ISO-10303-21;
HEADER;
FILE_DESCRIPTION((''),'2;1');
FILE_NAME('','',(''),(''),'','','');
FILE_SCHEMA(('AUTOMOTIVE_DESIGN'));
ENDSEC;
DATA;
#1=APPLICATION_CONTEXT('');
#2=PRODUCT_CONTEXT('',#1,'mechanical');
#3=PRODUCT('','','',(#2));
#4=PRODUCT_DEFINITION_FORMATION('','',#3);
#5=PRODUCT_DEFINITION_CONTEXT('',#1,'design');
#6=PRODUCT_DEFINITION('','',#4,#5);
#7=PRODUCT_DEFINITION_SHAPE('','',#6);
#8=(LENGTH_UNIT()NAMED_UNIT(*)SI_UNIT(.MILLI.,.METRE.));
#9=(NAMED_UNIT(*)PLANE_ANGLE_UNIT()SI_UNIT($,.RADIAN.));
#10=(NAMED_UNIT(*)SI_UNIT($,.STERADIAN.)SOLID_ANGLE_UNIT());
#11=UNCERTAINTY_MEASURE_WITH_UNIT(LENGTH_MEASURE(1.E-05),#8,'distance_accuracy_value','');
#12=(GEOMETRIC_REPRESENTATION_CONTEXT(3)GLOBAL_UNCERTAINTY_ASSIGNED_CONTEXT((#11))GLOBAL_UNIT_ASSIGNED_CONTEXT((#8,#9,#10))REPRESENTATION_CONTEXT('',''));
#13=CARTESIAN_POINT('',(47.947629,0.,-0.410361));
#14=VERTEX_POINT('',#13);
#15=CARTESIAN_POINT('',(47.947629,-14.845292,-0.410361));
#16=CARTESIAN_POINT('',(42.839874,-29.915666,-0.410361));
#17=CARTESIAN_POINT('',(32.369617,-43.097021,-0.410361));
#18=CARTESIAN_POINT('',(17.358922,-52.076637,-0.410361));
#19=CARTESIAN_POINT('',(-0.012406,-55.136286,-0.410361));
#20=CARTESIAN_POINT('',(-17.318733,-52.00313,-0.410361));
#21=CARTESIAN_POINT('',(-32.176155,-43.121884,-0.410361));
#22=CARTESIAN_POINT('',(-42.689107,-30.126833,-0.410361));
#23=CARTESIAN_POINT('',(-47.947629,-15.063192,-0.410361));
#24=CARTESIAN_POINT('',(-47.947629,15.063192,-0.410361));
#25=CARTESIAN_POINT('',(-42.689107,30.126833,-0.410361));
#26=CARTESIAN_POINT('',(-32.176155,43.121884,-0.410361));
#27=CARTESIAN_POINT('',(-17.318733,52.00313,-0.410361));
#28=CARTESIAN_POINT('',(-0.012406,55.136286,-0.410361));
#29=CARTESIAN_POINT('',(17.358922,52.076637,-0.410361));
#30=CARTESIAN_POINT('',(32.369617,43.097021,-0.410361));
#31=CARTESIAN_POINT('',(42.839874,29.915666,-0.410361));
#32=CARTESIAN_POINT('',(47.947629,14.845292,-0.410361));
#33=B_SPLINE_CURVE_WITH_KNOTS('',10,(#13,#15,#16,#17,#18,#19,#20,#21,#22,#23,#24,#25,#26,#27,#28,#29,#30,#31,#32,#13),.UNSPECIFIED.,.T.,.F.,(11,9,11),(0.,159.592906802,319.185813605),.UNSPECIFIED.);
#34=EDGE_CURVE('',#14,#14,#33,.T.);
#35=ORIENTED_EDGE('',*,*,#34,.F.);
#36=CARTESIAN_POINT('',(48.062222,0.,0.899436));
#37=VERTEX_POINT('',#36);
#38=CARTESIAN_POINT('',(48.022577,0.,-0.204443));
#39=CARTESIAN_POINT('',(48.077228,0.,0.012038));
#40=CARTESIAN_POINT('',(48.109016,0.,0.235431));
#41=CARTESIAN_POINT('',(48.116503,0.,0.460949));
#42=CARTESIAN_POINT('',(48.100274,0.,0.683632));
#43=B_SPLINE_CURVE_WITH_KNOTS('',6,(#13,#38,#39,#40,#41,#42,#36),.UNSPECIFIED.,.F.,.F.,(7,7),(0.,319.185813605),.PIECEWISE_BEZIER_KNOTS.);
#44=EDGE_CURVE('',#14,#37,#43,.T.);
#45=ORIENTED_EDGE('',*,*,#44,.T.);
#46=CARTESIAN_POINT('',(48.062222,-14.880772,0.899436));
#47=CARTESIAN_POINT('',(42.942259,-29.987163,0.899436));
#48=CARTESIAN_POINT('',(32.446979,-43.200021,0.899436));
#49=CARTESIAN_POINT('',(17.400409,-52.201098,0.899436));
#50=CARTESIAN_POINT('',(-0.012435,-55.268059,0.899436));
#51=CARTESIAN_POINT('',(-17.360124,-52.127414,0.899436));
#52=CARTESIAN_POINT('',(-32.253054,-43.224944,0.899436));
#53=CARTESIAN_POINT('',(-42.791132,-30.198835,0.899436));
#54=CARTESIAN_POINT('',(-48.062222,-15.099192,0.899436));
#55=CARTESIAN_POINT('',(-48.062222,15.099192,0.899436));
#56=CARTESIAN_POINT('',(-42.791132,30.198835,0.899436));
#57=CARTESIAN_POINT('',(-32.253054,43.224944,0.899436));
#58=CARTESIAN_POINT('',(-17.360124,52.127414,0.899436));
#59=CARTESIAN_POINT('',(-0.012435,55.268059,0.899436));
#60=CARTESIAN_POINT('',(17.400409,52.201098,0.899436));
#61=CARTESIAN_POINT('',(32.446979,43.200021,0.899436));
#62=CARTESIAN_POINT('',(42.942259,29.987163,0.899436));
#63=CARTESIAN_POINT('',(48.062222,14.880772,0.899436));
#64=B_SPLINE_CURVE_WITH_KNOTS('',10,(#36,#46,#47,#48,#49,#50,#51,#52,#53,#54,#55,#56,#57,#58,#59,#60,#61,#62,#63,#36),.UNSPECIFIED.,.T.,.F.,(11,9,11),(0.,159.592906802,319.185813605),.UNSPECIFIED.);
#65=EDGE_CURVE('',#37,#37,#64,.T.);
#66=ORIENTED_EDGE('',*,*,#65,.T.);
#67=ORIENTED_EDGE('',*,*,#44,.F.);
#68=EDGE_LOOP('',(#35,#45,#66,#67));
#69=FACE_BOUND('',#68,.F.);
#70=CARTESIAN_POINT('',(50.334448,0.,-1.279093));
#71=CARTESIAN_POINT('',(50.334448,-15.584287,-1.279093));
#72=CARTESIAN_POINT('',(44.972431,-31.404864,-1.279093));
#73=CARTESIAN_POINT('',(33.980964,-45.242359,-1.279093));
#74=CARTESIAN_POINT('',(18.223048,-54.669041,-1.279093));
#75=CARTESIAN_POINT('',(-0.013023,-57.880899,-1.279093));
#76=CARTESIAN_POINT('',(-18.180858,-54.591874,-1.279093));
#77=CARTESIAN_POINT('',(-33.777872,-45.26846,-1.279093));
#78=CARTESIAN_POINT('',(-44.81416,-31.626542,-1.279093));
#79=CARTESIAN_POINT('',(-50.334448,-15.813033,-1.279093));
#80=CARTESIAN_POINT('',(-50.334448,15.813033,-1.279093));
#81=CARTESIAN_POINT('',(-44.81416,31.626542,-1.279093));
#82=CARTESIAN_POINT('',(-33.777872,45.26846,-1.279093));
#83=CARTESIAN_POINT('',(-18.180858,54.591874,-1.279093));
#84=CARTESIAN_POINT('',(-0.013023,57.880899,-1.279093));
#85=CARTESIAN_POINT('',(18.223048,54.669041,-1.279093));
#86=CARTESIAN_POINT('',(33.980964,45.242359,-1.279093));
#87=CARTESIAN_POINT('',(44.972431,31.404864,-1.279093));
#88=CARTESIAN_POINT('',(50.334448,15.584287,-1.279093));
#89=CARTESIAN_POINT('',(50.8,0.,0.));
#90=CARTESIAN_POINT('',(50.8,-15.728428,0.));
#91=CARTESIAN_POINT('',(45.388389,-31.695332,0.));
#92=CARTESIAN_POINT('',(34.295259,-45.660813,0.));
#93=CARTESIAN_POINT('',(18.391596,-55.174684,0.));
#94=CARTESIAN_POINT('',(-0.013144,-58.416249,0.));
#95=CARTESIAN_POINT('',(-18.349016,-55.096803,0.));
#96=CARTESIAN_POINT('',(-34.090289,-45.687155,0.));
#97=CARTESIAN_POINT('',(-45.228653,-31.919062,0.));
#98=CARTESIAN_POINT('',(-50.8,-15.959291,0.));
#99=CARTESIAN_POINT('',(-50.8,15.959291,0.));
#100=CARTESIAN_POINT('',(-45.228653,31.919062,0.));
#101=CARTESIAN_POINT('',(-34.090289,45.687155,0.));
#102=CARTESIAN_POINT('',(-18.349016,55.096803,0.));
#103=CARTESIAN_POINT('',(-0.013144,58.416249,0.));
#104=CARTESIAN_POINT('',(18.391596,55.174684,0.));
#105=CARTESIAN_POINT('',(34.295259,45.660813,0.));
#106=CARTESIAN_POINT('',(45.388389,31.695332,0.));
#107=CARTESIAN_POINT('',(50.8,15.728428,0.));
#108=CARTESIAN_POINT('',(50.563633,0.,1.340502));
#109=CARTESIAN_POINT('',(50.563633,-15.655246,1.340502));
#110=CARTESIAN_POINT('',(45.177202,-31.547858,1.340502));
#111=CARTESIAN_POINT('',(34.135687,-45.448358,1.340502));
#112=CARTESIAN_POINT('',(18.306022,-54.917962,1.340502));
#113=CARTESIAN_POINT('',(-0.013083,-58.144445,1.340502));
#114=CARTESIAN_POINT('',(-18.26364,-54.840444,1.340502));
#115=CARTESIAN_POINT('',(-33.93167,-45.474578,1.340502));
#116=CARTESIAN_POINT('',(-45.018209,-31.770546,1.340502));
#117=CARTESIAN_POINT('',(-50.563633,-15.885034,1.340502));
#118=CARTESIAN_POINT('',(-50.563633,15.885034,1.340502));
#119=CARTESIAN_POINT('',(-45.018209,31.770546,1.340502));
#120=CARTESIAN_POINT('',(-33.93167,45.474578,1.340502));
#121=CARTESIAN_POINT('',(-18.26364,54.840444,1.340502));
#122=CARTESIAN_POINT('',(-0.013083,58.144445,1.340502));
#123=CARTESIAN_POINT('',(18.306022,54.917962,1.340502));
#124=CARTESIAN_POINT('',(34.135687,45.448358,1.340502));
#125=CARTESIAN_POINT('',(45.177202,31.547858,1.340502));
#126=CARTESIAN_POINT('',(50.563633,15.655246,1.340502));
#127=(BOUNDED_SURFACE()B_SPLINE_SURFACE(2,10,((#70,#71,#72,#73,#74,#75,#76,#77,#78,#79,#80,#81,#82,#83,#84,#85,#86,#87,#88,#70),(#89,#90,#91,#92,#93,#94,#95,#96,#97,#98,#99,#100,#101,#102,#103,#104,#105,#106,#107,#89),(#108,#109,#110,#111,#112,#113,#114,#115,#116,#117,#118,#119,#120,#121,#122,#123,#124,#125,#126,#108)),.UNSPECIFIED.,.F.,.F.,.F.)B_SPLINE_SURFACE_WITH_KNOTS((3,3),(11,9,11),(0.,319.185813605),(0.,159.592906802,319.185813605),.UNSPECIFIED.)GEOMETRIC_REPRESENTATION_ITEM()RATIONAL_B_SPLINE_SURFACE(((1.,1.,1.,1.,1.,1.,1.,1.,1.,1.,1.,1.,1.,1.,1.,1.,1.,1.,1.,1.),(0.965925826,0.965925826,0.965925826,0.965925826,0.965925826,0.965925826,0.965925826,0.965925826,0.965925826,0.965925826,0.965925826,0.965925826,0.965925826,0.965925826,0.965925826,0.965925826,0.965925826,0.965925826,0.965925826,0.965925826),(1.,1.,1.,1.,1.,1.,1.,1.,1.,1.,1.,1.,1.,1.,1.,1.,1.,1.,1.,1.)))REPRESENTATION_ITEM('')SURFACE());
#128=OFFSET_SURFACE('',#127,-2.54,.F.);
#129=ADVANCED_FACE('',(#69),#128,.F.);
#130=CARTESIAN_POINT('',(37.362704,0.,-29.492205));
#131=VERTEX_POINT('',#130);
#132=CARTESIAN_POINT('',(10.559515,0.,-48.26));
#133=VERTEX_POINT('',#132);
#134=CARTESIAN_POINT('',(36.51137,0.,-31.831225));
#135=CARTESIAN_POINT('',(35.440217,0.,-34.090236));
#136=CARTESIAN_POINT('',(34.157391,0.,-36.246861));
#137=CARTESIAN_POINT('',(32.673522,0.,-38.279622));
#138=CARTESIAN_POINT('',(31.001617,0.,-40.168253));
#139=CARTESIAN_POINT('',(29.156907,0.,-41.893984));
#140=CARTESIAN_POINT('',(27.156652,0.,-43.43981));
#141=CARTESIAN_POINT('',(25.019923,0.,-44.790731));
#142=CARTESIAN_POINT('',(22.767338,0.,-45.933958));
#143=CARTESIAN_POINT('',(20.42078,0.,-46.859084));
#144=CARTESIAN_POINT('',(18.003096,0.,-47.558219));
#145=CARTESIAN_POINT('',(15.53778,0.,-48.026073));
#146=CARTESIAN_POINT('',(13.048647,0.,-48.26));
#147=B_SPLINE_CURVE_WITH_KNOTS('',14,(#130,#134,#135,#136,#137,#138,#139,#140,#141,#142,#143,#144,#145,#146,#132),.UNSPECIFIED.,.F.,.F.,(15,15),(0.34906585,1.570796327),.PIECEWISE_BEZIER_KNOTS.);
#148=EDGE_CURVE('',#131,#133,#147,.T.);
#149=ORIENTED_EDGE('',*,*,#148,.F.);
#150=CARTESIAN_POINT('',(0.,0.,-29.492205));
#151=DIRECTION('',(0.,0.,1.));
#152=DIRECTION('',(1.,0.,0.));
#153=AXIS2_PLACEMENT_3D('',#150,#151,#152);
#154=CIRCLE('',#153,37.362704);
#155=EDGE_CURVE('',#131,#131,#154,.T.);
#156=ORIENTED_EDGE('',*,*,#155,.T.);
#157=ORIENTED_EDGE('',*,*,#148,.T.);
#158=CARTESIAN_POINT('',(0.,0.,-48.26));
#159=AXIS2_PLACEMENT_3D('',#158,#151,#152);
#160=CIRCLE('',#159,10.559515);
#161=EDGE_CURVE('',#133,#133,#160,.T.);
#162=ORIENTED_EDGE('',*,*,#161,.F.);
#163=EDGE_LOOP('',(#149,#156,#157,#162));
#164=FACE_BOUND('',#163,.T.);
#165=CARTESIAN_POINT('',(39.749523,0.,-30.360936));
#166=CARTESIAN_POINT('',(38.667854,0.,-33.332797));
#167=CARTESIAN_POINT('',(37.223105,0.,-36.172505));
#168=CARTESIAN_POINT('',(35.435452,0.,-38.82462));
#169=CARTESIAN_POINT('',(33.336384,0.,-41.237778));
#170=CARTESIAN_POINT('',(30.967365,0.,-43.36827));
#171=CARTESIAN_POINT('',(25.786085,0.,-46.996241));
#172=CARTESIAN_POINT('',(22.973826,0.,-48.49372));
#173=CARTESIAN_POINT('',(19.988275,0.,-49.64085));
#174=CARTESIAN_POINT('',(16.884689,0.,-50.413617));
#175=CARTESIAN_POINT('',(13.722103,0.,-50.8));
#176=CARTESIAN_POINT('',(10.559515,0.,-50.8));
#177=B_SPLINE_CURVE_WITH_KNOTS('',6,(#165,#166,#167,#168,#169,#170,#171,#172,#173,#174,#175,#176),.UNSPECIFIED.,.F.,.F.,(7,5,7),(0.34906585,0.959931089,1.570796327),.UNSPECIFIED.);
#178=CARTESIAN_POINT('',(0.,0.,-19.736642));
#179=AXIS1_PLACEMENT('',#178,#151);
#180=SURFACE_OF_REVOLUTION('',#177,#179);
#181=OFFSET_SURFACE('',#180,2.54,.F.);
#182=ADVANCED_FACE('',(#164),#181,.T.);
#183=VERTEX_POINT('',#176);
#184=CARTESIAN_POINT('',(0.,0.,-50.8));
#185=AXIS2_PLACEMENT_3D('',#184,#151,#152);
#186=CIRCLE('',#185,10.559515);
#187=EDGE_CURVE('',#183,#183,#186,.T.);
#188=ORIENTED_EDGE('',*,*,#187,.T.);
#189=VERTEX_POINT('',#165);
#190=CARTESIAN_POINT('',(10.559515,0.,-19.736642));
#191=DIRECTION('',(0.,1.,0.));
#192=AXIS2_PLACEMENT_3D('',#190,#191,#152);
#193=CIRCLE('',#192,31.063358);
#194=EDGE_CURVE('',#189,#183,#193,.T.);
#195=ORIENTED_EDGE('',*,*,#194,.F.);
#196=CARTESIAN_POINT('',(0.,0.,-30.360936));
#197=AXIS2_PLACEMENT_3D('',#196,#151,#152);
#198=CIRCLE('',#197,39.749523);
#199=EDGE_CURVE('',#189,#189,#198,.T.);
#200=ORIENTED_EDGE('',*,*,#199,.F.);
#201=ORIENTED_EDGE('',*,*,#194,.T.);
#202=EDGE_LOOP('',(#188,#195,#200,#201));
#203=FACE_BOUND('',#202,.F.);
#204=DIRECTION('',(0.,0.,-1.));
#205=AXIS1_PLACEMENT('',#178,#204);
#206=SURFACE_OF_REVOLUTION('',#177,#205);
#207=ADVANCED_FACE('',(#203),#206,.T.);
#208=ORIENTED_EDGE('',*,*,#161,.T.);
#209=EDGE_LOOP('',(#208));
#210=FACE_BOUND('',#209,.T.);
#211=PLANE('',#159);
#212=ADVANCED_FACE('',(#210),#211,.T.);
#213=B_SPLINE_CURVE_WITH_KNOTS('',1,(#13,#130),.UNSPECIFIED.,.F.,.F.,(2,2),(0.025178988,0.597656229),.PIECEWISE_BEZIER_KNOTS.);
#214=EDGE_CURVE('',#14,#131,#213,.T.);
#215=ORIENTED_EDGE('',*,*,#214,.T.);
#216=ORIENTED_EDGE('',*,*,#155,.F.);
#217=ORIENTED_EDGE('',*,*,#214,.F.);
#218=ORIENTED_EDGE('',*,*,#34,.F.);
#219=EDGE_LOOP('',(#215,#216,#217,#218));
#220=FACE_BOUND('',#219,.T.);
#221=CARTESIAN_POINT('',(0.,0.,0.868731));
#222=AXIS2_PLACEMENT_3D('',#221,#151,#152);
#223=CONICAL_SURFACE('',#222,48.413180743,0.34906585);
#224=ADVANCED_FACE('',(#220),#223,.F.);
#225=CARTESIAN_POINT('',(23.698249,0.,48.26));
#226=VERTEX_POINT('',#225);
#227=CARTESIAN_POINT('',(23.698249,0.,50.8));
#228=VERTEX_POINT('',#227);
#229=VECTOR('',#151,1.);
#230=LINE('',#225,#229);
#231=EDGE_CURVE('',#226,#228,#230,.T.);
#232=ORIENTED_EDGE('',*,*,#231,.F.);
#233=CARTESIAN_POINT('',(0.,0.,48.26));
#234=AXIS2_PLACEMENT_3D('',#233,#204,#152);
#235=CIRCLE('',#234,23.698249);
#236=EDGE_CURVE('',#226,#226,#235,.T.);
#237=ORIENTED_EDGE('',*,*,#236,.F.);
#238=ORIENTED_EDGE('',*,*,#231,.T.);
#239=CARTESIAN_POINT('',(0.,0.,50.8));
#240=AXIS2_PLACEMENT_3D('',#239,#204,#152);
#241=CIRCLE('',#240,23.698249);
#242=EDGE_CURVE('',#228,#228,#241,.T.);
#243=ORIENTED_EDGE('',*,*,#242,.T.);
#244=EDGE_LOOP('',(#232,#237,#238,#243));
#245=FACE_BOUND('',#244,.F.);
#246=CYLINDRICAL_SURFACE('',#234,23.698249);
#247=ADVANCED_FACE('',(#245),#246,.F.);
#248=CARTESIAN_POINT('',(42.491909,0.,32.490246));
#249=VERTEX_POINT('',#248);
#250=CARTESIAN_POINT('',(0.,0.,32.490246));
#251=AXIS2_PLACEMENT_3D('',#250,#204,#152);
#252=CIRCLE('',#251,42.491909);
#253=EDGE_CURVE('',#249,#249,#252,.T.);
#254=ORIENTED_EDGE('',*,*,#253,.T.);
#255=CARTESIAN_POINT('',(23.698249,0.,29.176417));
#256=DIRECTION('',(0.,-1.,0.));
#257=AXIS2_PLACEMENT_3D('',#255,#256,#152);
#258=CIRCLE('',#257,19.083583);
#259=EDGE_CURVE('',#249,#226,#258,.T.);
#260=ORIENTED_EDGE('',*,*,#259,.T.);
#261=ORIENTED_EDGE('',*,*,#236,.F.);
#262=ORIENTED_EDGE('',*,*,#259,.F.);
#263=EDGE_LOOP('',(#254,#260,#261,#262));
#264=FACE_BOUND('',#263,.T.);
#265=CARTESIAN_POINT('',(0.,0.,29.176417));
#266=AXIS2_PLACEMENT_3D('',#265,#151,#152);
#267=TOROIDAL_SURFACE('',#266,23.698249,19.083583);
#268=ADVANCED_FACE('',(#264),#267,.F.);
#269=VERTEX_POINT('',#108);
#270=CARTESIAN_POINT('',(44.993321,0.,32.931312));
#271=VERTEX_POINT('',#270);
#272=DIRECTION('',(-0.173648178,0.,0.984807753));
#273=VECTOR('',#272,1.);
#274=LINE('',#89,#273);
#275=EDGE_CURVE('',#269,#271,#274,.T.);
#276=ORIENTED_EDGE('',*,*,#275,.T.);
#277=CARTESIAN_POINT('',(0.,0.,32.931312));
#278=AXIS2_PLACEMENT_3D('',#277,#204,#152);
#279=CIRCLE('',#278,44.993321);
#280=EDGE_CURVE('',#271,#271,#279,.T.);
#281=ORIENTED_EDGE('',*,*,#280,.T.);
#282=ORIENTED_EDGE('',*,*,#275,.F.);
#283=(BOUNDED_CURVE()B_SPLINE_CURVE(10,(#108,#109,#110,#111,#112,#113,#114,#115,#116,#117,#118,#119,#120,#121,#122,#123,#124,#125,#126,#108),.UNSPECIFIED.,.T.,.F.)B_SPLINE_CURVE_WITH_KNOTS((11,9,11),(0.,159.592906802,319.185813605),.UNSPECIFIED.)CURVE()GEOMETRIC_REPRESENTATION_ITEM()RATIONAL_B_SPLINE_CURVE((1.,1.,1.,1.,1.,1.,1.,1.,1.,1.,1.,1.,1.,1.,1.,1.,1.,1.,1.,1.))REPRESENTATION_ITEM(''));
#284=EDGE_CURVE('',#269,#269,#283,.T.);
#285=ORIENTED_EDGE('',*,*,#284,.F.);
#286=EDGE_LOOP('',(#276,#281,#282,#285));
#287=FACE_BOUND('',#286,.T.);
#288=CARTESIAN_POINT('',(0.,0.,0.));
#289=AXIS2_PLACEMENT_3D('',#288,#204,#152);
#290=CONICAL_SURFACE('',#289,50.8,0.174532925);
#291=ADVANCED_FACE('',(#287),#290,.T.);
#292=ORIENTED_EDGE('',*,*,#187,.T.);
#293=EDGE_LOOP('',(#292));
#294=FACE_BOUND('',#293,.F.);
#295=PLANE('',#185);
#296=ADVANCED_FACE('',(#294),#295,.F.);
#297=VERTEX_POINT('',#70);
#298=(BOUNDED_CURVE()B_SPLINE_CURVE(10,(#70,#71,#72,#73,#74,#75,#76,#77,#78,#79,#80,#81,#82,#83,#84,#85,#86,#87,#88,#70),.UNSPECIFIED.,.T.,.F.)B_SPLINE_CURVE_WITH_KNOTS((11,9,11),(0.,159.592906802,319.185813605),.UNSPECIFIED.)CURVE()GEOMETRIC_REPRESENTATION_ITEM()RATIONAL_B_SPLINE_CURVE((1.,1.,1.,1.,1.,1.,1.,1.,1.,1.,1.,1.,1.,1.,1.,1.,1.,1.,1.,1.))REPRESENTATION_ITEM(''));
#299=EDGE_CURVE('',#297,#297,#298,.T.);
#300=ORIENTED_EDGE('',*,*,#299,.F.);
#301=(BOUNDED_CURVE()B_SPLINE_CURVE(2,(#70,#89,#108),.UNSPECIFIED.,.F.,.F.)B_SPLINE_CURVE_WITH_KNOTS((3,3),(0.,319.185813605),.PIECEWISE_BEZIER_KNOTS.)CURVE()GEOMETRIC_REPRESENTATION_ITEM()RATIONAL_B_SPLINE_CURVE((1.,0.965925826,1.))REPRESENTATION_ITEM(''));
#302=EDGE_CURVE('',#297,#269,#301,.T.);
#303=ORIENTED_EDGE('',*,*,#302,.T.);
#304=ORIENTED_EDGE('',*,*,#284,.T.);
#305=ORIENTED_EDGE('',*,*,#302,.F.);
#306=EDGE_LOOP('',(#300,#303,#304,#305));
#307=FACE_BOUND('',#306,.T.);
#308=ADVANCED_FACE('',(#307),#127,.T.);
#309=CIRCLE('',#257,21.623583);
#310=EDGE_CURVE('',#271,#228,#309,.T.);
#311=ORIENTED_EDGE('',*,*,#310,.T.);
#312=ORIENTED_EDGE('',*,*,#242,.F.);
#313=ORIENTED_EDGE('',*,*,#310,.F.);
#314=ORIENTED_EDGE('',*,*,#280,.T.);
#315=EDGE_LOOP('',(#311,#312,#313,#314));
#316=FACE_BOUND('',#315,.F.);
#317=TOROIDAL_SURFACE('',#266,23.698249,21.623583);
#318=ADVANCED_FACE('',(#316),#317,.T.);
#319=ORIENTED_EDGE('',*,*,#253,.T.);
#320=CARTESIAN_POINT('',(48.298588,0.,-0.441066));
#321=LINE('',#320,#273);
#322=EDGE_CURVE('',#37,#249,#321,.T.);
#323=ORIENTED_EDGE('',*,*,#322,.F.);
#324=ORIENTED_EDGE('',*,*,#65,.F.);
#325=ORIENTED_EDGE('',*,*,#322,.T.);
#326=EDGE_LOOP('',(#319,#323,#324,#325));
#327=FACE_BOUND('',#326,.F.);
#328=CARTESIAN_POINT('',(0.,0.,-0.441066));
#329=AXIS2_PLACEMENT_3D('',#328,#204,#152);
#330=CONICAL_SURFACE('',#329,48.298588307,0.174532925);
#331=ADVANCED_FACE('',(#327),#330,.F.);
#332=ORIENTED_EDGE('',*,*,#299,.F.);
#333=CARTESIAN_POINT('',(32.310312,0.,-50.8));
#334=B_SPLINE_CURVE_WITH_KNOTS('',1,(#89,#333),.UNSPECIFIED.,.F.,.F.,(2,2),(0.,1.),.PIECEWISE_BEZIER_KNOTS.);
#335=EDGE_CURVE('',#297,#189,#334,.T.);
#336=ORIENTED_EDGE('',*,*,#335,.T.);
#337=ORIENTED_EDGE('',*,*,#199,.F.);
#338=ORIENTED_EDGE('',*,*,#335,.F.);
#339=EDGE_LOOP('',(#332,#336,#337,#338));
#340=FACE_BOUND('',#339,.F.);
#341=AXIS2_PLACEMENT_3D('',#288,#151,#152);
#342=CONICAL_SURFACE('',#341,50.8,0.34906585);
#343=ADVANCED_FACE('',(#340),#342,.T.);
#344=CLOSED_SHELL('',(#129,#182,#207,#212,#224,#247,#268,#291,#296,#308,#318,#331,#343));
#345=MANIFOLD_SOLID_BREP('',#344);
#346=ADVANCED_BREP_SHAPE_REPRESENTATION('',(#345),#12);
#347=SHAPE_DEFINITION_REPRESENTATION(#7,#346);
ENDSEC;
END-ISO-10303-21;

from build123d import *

# Parameters (mm, degrees)
F0_R          = 50.8
F1_DEPTH      = 50.8
F1_TAPER      = 10
F1_DEPTH_BACK = 50.8
F1_TAPER_BACK = 20
F2_R          = 5.08
F3_R          = 31.0633576014
F4_R          = 21.6235834267
F5_T          = -2.54


# Not quite as in the source:
# - a shell that OpenCascade refuses in one call is made with other operations: the cavity is built on its own and cut out


with BuildPart() as f1:
    # F0 (on Top) → F1 (new body, two sides)
    with BuildSketch(Plane.XY) as f1_sk:
        Circle(F0_R)
    extrude(amount=F1_DEPTH, taper=F1_TAPER)
    extrude(f1_sk.sketch, amount=-F1_DEPTH_BACK, taper=F1_TAPER_BACK)

    # F2
    f2_edges = [f1.edges().sort_by_distance(p)[0] for p in [
        (-50.8, 0, 0),
    ]]
    fillet(f2_edges, radius=F2_R)

    # F3
    f3_edges = [f1.edges().sort_by_distance(p)[0] for p in [
        (-32.310312, 0, -50.8),
    ]]
    fillet(f3_edges, radius=F3_R)

    # F4
    f4_edges = [f1.edges().sort_by_distance(p)[0] for p in [
        (-41.842589, 0, 50.8),
    ]]
    fillet(f4_edges, radius=F4_R)

    # F5: a shell. OpenCascade refuses it in one call, so the cavity is built on its own and cut out:
    # the body offset inwards by the wall thickness, plus a prism from it out through each open face.
    f5_core = offset(f1.part, amount=F5_T, mode=Mode.PRIVATE)
    f5_exits = [f5_core.faces().sort_by_distance(p)[0] for p in [
        (0, 0, 48.26),
    ]]
    add(f5_core, mode=Mode.SUBTRACT)
    extrude(f5_exits, amount=-F5_T, mode=Mode.SUBTRACT)


solid = f1.part
